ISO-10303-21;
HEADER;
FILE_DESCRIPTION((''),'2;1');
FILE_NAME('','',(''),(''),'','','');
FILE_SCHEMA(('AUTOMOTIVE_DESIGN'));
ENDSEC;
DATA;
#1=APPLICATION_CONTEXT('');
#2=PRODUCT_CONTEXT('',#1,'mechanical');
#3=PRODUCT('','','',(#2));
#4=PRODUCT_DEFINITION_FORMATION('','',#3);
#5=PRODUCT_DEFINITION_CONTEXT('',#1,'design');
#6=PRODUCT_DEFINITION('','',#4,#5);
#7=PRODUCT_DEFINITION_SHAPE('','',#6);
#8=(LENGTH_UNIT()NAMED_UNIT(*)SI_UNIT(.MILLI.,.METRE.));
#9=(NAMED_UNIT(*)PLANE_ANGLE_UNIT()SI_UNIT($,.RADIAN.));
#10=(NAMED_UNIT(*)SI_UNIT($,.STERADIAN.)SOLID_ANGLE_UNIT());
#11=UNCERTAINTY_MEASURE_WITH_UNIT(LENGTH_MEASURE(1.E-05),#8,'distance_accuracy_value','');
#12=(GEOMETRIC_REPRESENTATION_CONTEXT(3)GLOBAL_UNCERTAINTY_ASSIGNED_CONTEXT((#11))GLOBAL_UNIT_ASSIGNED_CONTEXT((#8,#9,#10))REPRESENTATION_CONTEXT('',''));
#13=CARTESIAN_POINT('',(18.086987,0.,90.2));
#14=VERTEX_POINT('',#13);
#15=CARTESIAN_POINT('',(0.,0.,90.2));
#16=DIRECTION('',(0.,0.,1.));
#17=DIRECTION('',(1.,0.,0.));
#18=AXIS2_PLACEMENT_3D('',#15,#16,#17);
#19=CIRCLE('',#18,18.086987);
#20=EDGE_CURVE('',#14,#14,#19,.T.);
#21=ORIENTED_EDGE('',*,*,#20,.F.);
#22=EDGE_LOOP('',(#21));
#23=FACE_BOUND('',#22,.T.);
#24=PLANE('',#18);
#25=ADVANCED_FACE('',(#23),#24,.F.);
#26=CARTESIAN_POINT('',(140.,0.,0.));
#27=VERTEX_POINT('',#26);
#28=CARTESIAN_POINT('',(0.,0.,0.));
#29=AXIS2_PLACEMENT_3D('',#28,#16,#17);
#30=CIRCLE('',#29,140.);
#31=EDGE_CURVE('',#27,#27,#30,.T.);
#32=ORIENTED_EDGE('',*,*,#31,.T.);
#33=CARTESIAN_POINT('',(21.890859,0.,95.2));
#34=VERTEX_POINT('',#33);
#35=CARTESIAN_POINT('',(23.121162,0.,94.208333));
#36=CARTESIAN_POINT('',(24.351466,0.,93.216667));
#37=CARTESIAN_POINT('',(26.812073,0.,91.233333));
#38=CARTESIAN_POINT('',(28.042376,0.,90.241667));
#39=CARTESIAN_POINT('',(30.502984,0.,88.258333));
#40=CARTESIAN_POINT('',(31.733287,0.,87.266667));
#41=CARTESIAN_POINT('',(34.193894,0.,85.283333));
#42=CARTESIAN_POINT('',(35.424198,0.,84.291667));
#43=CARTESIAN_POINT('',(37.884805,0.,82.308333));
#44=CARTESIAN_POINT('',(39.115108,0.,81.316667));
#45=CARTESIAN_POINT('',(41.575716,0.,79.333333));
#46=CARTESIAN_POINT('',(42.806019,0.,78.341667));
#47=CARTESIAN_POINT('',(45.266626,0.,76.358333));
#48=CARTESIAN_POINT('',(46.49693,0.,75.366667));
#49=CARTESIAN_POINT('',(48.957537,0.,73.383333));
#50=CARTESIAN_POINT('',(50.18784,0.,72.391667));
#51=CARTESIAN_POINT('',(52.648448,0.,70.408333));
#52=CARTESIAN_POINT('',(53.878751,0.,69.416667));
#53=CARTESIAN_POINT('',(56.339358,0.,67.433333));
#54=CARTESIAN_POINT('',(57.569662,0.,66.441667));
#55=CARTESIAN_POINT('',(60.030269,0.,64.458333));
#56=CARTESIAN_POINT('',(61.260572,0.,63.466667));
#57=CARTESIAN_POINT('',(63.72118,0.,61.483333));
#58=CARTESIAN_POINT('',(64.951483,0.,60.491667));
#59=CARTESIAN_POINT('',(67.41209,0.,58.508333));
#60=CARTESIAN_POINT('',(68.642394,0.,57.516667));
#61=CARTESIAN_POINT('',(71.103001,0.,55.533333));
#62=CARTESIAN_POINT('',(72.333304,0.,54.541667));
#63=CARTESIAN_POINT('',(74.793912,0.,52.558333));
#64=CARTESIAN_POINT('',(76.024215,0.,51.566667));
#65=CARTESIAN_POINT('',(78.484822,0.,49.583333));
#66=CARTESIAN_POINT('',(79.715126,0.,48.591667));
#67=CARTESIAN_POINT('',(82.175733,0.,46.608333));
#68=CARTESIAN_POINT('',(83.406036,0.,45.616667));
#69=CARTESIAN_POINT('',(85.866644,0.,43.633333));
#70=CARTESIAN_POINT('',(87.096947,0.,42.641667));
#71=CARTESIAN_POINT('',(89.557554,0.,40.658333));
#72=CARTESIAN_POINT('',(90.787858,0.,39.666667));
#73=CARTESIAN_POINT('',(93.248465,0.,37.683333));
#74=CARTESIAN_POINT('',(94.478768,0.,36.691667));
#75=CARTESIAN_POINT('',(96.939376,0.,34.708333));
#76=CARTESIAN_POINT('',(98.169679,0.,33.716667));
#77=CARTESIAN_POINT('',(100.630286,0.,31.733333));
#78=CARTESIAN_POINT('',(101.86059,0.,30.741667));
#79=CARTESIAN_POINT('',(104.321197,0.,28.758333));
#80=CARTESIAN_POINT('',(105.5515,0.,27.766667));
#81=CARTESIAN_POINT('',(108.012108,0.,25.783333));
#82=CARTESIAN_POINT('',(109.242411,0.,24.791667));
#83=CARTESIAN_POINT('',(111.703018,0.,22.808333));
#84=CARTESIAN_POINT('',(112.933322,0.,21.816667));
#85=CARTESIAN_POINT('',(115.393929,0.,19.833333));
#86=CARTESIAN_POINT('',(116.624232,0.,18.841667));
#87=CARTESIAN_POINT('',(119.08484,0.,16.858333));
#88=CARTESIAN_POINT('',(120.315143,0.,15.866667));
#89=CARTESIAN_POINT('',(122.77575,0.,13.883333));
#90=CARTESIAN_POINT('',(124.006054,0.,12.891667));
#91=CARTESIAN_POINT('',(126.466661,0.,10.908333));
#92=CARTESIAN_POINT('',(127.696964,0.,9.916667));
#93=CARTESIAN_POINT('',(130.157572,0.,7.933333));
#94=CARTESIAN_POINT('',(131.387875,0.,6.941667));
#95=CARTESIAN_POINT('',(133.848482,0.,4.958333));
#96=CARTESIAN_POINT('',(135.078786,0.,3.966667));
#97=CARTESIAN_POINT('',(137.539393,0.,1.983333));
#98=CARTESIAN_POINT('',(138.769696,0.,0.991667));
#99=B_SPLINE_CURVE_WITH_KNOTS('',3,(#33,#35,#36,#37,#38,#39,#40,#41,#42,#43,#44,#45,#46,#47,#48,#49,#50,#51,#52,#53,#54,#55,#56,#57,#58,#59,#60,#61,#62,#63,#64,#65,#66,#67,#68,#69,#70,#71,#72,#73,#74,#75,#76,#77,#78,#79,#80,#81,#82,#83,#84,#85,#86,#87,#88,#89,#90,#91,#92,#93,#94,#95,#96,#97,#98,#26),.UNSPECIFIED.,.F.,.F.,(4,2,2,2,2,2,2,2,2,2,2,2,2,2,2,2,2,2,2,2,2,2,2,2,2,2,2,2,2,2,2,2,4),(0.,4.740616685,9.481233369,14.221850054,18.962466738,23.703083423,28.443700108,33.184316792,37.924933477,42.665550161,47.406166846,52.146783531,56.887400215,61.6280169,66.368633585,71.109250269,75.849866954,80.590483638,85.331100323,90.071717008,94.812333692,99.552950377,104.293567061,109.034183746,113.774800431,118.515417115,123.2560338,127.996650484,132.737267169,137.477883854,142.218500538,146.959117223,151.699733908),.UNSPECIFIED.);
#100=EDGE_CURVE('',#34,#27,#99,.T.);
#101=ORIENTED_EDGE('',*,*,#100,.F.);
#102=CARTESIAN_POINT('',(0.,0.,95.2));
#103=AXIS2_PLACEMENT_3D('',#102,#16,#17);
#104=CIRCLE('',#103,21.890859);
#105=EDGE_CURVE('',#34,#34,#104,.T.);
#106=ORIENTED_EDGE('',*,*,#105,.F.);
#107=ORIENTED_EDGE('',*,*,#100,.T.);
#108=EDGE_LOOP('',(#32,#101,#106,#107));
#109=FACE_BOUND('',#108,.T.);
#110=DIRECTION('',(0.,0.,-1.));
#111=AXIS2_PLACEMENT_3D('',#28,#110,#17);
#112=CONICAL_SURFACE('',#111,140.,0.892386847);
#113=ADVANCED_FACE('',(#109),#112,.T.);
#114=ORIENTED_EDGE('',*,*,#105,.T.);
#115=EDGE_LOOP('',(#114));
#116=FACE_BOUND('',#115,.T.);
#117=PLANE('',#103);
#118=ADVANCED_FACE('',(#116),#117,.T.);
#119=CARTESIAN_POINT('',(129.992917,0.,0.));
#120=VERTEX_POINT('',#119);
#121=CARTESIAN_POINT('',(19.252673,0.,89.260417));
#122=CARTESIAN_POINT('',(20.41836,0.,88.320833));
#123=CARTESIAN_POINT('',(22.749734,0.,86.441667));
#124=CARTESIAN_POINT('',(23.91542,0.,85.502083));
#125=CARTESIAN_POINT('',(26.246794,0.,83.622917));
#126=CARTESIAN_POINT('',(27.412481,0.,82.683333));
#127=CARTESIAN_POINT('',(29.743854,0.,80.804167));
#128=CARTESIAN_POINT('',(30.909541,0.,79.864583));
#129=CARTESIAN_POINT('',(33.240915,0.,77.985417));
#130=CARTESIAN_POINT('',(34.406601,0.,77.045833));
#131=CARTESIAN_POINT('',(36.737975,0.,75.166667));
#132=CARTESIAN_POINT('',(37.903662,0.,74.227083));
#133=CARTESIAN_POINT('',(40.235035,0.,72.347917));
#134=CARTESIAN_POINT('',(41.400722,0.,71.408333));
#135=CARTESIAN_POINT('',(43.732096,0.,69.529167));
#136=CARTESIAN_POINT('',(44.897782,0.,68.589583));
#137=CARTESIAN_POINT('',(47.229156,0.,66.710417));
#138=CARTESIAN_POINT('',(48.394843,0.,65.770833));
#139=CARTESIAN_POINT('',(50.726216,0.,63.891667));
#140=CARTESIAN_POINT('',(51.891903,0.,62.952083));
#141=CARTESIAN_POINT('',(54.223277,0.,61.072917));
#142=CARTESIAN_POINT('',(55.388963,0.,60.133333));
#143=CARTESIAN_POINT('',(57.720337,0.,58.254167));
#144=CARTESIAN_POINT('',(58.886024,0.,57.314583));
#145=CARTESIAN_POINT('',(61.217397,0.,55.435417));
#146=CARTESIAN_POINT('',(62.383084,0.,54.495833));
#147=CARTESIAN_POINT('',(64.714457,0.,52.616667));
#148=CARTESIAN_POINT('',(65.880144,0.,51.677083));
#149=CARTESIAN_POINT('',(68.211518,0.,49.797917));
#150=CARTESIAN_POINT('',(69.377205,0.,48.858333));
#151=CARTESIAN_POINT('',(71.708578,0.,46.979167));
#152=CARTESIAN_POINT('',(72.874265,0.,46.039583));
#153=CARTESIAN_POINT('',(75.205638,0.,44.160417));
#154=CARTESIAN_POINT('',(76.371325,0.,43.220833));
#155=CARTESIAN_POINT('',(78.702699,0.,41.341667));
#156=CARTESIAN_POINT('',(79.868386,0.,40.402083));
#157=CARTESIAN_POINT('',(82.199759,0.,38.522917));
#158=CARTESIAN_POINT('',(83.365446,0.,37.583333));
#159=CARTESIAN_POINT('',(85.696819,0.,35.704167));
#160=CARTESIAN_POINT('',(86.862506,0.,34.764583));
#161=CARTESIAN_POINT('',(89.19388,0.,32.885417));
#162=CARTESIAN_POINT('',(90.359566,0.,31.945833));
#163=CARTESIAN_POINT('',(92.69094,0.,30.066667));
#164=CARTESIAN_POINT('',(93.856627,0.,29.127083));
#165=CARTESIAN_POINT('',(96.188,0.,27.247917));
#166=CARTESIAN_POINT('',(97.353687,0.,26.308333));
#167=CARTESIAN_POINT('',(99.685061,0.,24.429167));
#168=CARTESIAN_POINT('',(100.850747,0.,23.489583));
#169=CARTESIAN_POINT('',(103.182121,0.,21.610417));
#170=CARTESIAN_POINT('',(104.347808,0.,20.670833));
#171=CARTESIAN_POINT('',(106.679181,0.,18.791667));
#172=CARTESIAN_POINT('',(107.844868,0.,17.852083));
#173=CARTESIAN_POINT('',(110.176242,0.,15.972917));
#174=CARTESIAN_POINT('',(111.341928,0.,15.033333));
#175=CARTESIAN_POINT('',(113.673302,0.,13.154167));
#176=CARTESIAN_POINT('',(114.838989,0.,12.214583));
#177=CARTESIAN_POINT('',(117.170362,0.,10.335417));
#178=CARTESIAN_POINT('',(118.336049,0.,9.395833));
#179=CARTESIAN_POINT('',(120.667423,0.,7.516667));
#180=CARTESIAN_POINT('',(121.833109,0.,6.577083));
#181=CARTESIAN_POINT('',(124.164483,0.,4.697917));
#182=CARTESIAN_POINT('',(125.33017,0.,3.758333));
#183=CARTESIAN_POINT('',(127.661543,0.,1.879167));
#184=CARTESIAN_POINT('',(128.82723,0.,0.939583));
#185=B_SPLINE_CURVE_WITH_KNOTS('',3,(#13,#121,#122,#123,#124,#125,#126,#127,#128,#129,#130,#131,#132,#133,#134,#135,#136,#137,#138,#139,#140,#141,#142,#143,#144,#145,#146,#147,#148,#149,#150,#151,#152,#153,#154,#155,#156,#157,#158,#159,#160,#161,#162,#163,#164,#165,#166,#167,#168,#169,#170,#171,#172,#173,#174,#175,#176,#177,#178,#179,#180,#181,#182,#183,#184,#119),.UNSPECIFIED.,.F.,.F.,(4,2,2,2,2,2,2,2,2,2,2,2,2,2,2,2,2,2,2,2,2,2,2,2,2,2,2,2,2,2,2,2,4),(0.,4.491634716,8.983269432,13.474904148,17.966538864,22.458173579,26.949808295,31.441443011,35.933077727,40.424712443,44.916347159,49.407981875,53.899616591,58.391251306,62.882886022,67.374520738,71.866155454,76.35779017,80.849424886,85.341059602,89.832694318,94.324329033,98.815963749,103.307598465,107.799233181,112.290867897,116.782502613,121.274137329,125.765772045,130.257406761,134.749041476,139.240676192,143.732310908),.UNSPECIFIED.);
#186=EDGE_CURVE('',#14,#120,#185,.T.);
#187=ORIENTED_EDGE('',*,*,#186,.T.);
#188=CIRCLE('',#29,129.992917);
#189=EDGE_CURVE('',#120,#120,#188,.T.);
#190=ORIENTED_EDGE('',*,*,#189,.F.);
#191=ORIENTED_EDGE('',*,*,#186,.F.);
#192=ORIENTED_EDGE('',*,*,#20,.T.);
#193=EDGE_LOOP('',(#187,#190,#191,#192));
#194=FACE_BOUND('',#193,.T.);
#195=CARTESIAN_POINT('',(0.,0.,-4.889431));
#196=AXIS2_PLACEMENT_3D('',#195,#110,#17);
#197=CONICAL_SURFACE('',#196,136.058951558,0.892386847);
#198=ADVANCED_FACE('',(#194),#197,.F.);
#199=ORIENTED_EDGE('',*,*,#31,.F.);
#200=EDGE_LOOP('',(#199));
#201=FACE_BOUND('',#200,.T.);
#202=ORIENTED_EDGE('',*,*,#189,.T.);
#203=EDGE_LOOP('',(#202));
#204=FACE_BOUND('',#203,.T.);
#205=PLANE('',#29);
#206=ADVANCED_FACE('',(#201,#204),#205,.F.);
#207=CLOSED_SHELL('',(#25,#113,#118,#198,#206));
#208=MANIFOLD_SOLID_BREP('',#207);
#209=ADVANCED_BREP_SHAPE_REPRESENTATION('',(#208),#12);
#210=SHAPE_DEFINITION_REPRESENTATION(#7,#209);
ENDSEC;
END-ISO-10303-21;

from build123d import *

# Parameters (mm, degrees)
SKETCH1_R           = 140
BOSS_EXTRUDE4_DEPTH = 95.2
BOSS_EXTRUDE4_TAPER = 51.13


# Read off the part's stored shape, not the designer's step: Shell5
with BuildPart() as part:
    # Sketch1 → Boss-Extrude4 (new body)
    with BuildSketch(Plane.XY):
        Circle(SKETCH1_R)
    extrude(amount=BOSS_EXTRUDE4_DEPTH, taper=BOSS_EXTRUDE4_TAPER)

    # Shell5 outline → Shell5 (revolve, cut)
    with BuildSketch(Plane.XZ):
        Polygon((129.992916713, 0), (18.08698658, 90.2), (0, 90.2), (0, 0), align=None)
    revolve(axis=Axis((0, 0, 0), (0, 0, 1)), mode=Mode.SUBTRACT)


solid = part.part
